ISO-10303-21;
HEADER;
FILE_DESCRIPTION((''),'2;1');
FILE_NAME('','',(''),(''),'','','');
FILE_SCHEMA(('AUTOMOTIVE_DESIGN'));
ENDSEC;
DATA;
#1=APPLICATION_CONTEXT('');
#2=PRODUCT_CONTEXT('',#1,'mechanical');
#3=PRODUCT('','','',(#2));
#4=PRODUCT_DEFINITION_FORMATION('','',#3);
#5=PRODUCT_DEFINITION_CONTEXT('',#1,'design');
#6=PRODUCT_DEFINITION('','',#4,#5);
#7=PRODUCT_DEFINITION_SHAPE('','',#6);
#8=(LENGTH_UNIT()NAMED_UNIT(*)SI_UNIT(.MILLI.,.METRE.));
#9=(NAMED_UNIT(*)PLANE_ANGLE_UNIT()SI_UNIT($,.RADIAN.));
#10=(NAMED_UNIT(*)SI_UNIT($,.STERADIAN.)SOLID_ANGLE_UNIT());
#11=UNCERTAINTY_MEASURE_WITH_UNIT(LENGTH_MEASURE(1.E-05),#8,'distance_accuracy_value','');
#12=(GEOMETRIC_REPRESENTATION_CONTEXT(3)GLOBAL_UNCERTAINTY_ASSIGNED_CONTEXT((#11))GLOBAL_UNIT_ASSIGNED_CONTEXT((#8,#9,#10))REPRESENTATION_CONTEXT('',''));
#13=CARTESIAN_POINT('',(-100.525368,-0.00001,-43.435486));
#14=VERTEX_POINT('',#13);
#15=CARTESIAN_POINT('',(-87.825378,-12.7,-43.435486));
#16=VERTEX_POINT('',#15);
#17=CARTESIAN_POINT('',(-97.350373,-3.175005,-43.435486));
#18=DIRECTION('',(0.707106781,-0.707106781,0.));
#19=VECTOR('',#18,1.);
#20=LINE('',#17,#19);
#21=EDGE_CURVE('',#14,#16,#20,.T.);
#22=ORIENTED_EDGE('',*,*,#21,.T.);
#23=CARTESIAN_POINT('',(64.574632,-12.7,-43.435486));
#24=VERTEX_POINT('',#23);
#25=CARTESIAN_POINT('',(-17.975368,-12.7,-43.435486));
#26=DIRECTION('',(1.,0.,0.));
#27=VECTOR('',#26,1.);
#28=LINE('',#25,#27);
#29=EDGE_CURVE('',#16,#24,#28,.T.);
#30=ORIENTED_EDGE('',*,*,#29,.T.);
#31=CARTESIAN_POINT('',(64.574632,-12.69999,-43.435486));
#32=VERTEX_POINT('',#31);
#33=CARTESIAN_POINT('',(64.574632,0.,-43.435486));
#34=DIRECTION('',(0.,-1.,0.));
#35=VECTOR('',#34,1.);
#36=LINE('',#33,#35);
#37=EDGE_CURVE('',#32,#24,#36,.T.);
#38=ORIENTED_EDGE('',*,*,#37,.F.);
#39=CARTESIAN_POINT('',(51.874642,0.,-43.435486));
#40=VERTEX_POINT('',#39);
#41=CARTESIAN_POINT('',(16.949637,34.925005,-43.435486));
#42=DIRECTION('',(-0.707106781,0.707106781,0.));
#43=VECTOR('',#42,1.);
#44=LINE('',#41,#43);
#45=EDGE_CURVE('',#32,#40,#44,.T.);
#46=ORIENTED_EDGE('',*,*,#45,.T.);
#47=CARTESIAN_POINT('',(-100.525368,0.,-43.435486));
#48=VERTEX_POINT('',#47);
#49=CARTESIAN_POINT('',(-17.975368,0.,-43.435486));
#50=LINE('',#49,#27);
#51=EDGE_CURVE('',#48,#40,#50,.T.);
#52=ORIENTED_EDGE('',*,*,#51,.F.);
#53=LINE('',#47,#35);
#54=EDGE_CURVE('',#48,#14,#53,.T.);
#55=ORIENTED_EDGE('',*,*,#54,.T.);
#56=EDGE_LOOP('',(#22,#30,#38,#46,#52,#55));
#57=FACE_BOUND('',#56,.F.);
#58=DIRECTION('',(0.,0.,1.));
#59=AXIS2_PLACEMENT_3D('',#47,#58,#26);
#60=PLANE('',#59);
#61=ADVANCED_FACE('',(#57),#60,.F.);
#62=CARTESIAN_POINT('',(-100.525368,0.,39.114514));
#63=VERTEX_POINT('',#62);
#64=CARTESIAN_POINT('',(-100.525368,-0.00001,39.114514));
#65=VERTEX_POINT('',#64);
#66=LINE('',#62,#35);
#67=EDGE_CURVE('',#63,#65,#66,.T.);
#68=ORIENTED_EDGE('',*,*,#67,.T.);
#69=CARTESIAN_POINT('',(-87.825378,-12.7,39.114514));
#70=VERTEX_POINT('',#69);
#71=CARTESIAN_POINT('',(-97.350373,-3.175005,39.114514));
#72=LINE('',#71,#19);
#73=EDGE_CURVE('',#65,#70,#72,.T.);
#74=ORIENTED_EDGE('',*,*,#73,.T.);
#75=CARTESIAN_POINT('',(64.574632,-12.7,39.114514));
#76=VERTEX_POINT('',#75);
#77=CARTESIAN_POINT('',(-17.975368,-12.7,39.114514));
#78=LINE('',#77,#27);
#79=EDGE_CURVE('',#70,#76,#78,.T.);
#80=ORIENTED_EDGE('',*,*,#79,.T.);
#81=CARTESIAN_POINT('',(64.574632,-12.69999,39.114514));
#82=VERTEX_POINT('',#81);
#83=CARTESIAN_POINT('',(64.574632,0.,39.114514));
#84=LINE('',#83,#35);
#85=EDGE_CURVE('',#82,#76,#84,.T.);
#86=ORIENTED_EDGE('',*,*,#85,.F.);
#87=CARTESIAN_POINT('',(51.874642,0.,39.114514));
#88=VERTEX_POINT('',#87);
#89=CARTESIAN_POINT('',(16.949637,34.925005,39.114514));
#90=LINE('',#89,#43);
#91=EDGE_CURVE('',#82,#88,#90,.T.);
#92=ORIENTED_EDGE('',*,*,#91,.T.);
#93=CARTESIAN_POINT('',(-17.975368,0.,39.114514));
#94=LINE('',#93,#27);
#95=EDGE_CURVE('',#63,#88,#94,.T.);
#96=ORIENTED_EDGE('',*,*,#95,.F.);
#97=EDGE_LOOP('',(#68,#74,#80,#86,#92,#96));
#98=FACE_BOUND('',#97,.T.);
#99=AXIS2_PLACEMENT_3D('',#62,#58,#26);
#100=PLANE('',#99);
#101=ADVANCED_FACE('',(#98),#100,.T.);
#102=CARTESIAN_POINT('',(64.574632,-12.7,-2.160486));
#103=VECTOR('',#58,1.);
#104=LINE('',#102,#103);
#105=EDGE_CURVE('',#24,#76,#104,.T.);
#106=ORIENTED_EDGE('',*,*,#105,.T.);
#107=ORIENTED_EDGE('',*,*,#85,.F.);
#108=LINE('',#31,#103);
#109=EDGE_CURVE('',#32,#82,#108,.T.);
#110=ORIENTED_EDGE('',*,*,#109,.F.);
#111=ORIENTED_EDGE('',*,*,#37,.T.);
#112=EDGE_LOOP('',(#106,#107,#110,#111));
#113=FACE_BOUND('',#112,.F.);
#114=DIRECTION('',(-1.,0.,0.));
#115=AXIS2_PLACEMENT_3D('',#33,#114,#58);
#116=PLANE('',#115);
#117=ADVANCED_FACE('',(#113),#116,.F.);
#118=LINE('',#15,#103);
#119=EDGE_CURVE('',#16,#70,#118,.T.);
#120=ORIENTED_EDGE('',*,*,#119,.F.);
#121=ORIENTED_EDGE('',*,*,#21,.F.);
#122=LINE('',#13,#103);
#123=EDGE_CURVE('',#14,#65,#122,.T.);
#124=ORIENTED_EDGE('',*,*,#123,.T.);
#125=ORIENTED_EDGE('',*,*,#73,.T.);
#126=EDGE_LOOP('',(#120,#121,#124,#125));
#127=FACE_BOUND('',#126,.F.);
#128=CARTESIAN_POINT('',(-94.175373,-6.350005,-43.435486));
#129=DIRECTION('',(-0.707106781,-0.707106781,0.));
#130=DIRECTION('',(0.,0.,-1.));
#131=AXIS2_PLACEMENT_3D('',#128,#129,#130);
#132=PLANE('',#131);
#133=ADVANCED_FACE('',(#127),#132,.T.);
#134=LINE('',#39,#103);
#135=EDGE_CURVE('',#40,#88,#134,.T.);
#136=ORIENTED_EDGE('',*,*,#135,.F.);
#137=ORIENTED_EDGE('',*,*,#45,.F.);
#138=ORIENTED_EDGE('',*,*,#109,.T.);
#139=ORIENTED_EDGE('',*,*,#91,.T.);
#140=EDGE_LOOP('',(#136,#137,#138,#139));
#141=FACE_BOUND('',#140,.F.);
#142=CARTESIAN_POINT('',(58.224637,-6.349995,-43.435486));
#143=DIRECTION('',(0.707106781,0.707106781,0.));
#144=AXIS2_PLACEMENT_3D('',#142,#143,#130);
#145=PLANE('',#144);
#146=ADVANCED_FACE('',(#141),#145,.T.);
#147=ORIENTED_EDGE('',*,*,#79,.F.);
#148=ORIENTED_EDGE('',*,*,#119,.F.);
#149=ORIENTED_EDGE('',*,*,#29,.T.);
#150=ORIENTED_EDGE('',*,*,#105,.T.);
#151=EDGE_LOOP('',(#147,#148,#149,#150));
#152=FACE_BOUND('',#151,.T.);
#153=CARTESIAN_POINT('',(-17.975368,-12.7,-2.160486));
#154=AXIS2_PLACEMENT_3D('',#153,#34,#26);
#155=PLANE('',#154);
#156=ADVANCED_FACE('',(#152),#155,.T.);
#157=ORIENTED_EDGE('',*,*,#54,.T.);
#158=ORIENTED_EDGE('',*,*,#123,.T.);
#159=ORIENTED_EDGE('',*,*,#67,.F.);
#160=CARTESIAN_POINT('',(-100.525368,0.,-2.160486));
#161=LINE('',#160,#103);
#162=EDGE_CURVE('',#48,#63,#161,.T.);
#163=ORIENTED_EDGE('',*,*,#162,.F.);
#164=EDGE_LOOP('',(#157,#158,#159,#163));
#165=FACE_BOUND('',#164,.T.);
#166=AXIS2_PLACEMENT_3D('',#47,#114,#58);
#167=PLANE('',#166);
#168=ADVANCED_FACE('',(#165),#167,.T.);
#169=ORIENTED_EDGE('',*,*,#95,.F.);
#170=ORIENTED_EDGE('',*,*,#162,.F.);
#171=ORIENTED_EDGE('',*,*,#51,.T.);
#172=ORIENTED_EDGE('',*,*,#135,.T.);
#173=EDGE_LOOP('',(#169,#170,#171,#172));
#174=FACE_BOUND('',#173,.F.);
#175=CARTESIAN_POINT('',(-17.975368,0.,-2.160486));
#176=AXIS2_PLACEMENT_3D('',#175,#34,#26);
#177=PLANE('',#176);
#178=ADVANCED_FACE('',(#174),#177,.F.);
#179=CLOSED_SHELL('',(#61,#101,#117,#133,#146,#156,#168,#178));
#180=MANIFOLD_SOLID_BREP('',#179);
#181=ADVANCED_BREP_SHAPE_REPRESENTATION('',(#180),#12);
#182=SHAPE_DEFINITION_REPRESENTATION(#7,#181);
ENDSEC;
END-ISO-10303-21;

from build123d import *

# Parameters (mm, degrees)
F0_W     = 165.1
F0_H     = 82.55
F1_DEPTH = 12.7
F2_SIZE  = 12.69999


# Not quite as in the source:
# - a fillet or chamfer is up to 0.001 mm smaller than in the source, because OpenCascade refuses the exact size


with BuildPart() as f1:
    # F0 (on Front) → F1 (new body)
    with BuildSketch(Plane.XZ):
        with Locations((-17.9753675056, -2.1604858339)):
            Rectangle(F0_W, F0_H)
    extrude(amount=F1_DEPTH)

    # F2 (size 12.7 in the source; OpenCascade refuses exactly that, so slightly less here)
    f2_edges = [f1.edges().sort_by_distance(p)[0] for p in [
        (64.574632, 0, -2.160486),
        (-100.525368, -12.7, -2.160486),
    ]]
    chamfer(f2_edges, length=F2_SIZE)


solid = f1.part
